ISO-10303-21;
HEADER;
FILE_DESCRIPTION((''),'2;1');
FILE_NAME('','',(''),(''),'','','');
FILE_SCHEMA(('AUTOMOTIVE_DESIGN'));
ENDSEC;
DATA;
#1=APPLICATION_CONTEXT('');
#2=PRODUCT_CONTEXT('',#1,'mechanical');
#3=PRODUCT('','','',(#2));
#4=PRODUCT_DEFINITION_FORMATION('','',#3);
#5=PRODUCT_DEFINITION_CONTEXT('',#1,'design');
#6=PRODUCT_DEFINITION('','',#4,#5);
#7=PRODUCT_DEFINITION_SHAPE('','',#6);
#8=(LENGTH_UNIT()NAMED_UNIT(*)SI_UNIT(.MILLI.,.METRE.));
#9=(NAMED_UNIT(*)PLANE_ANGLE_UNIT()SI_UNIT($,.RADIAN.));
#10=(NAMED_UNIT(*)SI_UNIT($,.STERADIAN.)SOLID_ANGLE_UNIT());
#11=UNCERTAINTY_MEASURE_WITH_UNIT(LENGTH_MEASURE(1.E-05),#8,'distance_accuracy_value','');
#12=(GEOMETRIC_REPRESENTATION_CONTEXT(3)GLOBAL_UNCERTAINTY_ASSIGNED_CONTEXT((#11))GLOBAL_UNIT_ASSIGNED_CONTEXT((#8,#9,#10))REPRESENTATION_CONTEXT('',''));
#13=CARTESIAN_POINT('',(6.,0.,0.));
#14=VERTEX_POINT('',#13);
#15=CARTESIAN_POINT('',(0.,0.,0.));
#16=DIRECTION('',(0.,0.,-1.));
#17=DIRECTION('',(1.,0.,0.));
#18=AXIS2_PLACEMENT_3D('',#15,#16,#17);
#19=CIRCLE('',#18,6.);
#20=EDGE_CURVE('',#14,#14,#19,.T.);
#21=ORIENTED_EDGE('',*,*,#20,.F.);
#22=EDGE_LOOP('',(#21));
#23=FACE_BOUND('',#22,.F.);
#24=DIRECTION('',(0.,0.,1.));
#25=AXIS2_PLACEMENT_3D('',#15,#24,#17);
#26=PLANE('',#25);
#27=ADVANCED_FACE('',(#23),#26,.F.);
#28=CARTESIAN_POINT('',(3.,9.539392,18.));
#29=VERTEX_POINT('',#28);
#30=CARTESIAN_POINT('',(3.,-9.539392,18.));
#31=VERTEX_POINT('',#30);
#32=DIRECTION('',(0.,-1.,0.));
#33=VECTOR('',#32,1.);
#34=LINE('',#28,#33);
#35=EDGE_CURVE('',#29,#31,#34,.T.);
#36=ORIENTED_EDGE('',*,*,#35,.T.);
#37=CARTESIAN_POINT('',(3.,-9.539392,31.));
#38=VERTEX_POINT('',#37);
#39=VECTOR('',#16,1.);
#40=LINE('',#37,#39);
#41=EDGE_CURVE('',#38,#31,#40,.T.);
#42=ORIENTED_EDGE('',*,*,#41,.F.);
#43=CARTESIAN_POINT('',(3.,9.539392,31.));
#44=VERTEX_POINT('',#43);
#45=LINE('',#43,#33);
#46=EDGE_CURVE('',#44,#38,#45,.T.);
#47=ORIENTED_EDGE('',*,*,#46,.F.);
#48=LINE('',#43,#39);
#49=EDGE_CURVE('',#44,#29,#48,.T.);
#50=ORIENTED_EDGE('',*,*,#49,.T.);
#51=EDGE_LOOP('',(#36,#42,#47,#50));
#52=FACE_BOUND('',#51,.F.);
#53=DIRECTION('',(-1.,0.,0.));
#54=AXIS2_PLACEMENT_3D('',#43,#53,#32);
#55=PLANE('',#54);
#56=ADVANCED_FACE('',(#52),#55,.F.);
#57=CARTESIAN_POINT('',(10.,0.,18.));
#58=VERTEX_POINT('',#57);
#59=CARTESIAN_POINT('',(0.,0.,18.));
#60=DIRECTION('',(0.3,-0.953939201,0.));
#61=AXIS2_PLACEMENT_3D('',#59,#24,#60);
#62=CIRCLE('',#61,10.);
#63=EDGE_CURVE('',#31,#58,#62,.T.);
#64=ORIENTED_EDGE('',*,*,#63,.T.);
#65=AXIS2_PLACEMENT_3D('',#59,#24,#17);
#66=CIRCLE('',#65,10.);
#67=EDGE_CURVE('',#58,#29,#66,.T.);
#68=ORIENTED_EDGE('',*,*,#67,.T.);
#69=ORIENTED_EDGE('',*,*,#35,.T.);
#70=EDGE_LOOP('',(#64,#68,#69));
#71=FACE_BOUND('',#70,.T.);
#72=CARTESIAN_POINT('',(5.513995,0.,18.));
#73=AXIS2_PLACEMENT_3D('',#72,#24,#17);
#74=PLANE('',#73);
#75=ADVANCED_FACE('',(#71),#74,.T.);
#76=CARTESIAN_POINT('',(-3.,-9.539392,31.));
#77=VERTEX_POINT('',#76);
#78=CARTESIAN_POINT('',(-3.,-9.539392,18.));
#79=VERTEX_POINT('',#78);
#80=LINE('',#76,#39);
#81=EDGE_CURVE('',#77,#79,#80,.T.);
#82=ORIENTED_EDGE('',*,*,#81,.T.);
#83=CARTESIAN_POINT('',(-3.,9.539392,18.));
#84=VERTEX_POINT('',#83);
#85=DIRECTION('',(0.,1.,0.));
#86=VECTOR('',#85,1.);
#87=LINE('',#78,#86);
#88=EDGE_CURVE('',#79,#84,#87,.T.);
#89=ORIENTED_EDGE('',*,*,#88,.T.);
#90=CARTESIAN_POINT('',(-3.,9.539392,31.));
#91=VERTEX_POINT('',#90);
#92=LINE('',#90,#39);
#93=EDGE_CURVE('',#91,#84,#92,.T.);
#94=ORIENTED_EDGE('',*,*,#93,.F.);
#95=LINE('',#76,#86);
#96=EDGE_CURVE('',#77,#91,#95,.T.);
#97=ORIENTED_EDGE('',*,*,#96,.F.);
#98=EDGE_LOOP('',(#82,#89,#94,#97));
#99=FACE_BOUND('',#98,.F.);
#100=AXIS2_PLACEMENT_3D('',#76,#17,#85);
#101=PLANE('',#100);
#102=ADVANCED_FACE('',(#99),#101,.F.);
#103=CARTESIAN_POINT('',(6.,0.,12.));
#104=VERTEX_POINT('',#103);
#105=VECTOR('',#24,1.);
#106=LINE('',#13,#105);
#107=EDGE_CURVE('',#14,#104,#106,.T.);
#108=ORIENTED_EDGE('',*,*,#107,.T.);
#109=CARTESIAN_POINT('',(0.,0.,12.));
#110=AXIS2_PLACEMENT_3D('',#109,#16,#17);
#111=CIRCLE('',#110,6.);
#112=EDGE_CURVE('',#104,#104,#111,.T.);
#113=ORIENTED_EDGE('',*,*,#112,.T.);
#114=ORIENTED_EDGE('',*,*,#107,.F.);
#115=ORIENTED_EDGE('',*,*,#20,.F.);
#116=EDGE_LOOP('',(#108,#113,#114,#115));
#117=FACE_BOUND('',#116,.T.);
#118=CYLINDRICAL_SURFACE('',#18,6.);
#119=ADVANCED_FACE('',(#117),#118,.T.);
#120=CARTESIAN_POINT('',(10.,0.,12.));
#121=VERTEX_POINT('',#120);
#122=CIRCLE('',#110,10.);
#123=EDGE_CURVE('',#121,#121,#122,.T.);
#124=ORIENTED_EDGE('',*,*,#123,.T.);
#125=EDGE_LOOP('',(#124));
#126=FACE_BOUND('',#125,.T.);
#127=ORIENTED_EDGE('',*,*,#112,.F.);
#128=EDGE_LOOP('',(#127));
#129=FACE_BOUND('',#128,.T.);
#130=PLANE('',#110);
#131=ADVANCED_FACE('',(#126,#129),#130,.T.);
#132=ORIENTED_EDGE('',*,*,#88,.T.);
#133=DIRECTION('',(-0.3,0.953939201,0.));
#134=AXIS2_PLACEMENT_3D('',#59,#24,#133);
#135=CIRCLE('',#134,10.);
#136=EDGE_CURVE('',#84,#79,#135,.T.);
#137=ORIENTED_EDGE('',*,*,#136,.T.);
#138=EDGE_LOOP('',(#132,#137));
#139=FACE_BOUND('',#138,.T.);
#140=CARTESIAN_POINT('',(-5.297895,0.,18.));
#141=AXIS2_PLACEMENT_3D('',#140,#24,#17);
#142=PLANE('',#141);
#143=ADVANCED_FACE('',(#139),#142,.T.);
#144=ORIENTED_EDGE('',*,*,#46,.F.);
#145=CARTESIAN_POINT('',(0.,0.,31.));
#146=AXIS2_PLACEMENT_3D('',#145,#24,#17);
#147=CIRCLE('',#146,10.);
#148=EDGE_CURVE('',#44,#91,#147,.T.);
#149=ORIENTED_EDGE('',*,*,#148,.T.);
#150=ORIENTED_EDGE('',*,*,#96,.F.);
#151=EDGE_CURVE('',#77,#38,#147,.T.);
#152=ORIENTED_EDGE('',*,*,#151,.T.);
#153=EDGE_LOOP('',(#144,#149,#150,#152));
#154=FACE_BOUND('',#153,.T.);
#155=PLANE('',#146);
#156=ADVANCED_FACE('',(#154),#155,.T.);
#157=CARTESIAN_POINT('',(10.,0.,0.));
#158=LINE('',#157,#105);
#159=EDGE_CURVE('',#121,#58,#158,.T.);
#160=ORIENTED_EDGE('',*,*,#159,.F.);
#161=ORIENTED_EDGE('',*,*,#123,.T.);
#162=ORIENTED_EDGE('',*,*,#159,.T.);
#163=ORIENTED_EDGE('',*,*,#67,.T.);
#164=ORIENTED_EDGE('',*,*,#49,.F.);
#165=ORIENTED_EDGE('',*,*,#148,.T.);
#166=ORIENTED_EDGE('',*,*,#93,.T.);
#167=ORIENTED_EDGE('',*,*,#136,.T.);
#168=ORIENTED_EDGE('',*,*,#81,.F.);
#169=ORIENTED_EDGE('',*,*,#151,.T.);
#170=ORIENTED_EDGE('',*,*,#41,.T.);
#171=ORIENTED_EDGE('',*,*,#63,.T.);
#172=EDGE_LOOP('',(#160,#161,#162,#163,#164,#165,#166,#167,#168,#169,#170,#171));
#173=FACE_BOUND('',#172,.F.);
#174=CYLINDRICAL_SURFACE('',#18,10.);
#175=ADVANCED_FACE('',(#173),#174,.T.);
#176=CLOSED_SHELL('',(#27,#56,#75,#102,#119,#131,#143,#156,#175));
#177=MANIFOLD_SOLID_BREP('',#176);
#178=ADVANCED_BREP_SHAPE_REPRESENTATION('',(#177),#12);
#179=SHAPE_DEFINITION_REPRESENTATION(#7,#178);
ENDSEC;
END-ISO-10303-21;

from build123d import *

# Parameters (mm, degrees)
F0_R     = 10
F1_DEPTH = 31
F3_DEPTH = 13
F4_R     = 10
F4_R_2   = 6
F5_DEPTH = 12


with BuildPart() as f1:
    # F0 (on Top) → F1 (new body)
    with BuildSketch(Plane.XY):
        Circle(F0_R)
    extrude(amount=F1_DEPTH)

    # F2 (on face) → F3 (cut)
    with BuildSketch(Plane.XY.offset(31)):
        with BuildLine():
            Line((3, 9.5393920142), (3, 0))
            Line((3, 0), (3, -9.5393920142))
            ThreePointArc((3, -9.5393920142), (8.0622577483, -5.9160797831), (10, 0))
            ThreePointArc((10, 0), (8.0622577483, 5.9160797831), (3, 9.5393920142))
        make_face()
        with BuildLine():
            Line((-3, -9.5393920142), (-3, 0))
            Line((-3, 0), (-3, 9.5393920142))
            ThreePointArc((-3, 9.5393920142), (-10, 0), (-3, -9.5393920142))
        make_face()
    extrude(amount=-F3_DEPTH, mode=Mode.SUBTRACT)

    # F4 (on face) → F5 (cut)
    with BuildSketch(Plane(origin=(0, 0, 0), x_dir=(1, 0, 0), z_dir=(0, 0, -1))):
        Circle(F4_R)
        Circle(F4_R_2, mode=Mode.SUBTRACT)
    extrude(amount=-F5_DEPTH, mode=Mode.SUBTRACT)


solid = f1.part
